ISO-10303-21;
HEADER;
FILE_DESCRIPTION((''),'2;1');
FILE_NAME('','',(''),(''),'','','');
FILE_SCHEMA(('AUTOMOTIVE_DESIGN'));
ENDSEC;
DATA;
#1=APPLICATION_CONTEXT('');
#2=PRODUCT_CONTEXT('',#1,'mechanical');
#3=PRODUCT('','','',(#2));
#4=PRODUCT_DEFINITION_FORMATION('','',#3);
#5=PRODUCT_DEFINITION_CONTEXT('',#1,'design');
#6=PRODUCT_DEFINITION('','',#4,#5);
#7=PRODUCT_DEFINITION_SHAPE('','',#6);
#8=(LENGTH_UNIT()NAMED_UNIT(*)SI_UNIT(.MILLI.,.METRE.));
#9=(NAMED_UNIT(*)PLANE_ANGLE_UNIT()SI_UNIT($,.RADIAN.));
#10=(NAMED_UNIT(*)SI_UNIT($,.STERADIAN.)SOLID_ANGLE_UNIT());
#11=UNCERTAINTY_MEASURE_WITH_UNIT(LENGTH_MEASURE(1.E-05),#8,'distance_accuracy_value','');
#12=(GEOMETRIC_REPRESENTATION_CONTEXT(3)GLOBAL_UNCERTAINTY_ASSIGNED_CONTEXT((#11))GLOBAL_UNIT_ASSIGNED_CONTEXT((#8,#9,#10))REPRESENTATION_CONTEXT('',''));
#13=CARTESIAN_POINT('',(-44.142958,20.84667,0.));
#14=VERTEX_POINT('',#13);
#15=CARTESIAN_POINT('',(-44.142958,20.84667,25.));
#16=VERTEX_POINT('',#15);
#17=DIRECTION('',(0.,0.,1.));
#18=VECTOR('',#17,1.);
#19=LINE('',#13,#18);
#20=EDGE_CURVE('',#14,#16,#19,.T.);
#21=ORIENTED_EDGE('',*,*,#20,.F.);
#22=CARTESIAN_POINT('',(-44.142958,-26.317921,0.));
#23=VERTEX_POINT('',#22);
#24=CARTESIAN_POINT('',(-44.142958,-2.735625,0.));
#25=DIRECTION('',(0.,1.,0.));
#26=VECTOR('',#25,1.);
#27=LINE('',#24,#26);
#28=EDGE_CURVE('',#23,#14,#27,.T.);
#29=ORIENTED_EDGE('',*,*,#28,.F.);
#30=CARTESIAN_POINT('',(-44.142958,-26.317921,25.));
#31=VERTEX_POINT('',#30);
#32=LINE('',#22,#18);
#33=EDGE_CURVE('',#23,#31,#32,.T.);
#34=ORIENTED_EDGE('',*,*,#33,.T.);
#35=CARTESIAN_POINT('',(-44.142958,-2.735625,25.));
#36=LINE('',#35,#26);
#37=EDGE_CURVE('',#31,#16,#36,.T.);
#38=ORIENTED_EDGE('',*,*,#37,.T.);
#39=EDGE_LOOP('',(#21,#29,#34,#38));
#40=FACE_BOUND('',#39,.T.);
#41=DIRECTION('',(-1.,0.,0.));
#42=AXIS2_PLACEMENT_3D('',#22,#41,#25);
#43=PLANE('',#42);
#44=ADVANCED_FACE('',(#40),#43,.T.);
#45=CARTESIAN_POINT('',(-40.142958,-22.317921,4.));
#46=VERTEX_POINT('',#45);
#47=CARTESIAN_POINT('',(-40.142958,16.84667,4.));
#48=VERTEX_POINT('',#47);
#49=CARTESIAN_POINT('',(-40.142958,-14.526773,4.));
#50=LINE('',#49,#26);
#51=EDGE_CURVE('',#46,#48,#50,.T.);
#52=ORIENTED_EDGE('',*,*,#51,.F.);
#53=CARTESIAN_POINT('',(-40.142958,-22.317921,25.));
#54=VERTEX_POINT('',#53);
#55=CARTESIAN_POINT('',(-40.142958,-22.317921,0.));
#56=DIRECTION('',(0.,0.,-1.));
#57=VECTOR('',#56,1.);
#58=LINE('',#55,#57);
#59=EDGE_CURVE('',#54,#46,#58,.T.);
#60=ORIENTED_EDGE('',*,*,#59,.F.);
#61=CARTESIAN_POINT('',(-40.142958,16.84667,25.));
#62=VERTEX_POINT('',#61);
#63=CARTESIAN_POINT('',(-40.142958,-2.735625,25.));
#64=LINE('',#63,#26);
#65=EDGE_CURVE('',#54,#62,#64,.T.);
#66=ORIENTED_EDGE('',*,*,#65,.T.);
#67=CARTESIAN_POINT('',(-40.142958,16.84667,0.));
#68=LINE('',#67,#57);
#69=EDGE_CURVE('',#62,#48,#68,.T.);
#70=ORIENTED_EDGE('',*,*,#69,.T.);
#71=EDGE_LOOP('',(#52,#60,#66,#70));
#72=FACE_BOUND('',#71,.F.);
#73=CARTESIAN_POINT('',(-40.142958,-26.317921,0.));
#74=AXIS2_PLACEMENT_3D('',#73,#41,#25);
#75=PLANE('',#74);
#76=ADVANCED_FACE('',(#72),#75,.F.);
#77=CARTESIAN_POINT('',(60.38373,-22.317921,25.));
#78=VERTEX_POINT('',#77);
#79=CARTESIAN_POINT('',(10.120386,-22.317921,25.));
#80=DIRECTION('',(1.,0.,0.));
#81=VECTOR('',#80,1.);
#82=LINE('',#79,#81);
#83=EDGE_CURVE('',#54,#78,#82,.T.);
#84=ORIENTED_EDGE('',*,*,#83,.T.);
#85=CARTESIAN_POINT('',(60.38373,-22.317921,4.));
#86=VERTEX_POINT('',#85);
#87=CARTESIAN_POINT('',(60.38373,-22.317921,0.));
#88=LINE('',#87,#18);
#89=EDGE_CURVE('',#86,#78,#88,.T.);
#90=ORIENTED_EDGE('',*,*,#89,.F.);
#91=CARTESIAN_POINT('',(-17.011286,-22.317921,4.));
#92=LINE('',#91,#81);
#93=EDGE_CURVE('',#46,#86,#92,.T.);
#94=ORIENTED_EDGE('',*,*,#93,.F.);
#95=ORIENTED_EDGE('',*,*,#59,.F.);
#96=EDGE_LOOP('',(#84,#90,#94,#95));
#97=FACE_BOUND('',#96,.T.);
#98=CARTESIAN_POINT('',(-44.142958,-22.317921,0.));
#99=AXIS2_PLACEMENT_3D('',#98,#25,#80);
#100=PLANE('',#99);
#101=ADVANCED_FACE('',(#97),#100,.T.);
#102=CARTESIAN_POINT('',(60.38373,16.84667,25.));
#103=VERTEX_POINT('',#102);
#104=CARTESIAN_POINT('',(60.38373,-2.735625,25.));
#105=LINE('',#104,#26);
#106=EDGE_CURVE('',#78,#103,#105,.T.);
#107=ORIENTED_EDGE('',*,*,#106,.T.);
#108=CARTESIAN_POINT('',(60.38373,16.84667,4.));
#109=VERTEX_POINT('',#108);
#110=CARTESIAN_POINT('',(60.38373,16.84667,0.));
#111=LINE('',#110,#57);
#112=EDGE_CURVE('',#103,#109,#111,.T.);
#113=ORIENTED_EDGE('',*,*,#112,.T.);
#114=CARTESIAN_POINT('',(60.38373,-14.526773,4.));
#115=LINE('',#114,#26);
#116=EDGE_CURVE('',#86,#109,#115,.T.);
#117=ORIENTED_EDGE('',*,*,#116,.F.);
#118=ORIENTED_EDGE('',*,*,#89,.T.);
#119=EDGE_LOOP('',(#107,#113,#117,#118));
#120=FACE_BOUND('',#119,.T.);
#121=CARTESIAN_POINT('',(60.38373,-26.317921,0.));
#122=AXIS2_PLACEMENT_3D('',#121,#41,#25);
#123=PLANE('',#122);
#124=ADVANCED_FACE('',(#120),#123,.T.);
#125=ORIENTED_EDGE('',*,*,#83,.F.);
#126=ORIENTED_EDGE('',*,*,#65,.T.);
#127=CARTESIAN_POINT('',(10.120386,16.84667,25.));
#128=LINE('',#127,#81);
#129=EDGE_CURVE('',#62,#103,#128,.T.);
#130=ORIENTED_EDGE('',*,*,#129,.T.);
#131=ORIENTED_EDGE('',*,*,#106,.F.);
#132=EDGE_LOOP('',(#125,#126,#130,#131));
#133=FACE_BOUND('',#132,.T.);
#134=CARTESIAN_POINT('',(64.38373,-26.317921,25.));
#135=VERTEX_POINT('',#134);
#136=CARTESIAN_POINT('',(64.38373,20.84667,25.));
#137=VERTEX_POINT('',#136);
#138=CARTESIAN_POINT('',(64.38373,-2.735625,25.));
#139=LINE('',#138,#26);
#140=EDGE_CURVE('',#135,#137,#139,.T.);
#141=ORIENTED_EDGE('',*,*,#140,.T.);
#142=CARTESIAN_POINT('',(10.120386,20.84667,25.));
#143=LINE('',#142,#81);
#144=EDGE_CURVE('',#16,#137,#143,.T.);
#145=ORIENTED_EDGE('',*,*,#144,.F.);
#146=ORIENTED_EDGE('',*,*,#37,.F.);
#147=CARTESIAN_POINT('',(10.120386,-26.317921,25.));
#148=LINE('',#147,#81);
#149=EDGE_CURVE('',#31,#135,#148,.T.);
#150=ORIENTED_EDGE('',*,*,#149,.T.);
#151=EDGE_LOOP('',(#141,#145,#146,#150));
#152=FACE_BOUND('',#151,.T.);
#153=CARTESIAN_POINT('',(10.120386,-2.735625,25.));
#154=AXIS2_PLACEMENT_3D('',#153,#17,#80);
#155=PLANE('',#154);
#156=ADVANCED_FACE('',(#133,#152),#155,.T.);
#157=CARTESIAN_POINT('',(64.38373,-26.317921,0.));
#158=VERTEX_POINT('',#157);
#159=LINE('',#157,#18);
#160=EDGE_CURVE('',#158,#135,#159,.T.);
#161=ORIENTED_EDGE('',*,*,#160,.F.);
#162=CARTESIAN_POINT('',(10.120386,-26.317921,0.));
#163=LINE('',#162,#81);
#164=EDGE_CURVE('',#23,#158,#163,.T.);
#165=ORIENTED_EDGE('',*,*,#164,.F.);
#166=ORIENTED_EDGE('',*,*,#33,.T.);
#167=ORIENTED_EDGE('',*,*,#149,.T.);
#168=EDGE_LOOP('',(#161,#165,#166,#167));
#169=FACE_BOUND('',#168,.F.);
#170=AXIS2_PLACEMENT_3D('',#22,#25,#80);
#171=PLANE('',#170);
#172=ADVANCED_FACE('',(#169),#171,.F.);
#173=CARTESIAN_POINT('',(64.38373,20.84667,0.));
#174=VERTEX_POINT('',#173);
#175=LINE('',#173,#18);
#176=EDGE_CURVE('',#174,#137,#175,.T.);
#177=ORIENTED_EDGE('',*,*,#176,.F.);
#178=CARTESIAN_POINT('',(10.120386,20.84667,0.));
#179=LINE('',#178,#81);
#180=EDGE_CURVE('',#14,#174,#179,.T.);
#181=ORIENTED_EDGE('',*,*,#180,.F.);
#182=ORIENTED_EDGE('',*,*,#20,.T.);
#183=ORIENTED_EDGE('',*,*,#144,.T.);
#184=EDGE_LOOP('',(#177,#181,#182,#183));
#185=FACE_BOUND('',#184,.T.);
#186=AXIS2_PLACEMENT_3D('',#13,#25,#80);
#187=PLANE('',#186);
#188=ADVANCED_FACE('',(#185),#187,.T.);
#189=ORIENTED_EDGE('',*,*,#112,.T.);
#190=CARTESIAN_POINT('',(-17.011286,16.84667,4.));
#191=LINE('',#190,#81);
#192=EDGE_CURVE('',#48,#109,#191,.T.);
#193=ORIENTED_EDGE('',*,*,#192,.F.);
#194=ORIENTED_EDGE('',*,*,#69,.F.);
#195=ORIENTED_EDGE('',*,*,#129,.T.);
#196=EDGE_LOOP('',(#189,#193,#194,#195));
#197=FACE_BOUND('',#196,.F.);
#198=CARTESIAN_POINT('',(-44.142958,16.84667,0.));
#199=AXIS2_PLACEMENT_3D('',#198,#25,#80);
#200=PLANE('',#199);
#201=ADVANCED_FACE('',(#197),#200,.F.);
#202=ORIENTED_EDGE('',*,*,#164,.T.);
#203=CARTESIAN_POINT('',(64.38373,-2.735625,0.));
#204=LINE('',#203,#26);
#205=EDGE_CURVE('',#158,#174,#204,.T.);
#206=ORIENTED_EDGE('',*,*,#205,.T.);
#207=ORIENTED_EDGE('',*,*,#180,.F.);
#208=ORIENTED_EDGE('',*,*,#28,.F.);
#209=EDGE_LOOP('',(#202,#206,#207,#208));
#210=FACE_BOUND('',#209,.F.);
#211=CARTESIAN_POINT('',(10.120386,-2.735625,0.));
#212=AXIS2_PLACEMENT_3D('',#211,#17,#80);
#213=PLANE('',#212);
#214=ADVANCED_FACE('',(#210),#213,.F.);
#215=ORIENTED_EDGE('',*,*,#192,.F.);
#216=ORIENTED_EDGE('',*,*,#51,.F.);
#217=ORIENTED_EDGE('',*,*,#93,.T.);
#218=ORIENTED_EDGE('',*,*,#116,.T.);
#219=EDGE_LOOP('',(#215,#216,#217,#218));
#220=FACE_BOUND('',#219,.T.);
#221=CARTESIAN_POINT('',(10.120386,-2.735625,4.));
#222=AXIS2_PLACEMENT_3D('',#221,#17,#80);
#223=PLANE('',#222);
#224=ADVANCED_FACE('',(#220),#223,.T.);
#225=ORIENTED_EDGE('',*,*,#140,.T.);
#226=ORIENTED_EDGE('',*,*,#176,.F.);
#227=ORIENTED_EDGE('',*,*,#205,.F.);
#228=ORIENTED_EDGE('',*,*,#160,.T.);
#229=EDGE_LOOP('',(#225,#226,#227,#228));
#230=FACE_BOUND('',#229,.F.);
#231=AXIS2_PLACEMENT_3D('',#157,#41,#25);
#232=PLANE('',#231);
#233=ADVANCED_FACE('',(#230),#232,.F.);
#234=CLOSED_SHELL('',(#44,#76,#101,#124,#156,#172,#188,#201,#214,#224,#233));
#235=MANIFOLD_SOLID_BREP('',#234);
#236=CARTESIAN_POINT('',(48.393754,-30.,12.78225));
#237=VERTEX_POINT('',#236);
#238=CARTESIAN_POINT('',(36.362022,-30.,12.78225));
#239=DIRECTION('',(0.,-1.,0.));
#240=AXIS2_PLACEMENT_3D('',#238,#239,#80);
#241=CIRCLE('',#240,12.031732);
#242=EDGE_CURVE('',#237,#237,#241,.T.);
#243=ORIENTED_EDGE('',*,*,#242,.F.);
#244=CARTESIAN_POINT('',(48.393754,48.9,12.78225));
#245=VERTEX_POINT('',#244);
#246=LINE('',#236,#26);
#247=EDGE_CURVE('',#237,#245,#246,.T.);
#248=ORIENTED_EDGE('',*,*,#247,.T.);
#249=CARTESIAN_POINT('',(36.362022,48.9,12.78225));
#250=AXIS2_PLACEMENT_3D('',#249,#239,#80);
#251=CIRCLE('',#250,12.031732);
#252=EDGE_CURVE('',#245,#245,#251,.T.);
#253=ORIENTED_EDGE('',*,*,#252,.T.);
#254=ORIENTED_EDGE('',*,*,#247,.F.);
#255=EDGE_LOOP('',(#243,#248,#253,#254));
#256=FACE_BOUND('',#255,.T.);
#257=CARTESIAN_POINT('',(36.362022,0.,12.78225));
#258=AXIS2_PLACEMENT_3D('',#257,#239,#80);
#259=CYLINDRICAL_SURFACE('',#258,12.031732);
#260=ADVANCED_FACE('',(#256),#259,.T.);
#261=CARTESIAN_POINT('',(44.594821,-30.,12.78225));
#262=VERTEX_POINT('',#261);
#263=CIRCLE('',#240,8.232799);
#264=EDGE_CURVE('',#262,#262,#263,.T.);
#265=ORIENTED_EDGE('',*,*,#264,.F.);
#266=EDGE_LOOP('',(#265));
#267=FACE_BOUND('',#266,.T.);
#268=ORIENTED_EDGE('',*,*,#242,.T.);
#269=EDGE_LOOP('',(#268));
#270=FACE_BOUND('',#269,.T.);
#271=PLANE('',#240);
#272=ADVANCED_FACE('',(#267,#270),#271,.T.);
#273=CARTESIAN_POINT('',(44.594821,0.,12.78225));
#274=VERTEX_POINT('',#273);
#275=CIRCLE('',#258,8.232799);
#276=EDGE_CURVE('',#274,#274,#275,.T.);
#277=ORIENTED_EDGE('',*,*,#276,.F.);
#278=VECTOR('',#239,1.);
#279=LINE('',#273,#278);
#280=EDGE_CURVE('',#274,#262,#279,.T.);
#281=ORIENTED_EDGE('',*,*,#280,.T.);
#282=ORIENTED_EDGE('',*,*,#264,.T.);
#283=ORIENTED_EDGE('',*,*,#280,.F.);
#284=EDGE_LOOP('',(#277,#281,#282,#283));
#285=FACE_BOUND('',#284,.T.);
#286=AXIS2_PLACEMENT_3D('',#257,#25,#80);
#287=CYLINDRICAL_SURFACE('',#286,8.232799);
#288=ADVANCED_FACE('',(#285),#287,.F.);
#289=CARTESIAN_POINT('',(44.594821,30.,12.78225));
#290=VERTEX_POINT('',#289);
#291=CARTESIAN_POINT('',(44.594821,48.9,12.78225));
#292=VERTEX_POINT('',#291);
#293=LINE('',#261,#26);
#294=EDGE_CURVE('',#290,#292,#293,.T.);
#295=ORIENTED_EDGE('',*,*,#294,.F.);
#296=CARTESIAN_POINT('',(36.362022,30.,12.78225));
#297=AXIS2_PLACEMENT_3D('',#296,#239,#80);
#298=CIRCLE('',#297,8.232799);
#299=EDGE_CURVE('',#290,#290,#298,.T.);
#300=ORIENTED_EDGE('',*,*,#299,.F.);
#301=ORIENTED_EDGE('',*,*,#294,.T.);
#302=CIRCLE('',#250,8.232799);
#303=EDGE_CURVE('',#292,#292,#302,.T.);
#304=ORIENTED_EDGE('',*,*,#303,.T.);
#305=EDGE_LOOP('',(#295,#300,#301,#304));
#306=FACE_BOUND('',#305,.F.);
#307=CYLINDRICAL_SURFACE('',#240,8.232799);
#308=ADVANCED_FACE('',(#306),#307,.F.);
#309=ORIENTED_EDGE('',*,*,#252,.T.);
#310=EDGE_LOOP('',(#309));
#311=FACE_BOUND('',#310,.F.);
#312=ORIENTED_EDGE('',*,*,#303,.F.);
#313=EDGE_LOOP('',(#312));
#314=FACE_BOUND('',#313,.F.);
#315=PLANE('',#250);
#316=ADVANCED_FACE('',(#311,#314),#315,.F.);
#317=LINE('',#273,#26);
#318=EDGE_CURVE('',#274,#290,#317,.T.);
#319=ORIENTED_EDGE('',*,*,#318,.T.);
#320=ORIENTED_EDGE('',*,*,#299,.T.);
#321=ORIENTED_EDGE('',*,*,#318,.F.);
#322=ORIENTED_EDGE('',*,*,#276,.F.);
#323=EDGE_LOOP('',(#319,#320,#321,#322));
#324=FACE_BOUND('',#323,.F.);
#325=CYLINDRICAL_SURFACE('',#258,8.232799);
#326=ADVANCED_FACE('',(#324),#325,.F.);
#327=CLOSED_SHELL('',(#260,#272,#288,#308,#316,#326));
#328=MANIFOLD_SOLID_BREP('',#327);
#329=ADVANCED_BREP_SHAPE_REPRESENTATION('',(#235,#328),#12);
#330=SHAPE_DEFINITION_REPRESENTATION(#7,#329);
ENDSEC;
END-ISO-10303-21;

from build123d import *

# Parameters (mm, degrees)
F0_W          = 108.5266880691
F0_H          = 47.1645910293
F1_DEPTH      = 25
F2_T          = -4
F3_R          = 12.0317315012
F3_R_2        = 8.2327991294
F4_DEPTH      = 30
F4_DEPTH_BACK = 30
F5_DEPTH      = 78.9


with BuildPart() as f1:
    # F0 (on Top) → F1 (new body)
    with BuildSketch(Plane.XY):
        with Locations((10.1203862578, -2.7356250212)):
            Rectangle(F0_W, F0_H)
    extrude(amount=F1_DEPTH)

    # F2
    f2_openings = [f1.faces().sort_by_distance(p)[0] for p in [
        (10.120386, -2.735625, 25),
    ]]
    offset(amount=F2_T, openings=f2_openings)


with BuildPart() as f4:
    # F3 (on Front) → F4 (new body, two sides)
    with BuildSketch(Plane.XZ) as f4_sk:
        with Locations((36.3620221615, 12.7822495997)):
            Circle(F3_R)
        with Locations((36.3620221615, 12.7822495997)):
            Circle(F3_R_2, mode=Mode.SUBTRACT)
    extrude(amount=F4_DEPTH)
    extrude(f4_sk.sketch, amount=-F4_DEPTH_BACK)

    # F5 (add): a face of the model
    f5_faces = [f4.faces().sort_by_distance(p)[0] for p in [
        (24.6705994176, -30, 12.7822495997),
    ]]
    extrude(f5_faces, amount=-F5_DEPTH)


solid = Compound([f1.part, f4.part])
